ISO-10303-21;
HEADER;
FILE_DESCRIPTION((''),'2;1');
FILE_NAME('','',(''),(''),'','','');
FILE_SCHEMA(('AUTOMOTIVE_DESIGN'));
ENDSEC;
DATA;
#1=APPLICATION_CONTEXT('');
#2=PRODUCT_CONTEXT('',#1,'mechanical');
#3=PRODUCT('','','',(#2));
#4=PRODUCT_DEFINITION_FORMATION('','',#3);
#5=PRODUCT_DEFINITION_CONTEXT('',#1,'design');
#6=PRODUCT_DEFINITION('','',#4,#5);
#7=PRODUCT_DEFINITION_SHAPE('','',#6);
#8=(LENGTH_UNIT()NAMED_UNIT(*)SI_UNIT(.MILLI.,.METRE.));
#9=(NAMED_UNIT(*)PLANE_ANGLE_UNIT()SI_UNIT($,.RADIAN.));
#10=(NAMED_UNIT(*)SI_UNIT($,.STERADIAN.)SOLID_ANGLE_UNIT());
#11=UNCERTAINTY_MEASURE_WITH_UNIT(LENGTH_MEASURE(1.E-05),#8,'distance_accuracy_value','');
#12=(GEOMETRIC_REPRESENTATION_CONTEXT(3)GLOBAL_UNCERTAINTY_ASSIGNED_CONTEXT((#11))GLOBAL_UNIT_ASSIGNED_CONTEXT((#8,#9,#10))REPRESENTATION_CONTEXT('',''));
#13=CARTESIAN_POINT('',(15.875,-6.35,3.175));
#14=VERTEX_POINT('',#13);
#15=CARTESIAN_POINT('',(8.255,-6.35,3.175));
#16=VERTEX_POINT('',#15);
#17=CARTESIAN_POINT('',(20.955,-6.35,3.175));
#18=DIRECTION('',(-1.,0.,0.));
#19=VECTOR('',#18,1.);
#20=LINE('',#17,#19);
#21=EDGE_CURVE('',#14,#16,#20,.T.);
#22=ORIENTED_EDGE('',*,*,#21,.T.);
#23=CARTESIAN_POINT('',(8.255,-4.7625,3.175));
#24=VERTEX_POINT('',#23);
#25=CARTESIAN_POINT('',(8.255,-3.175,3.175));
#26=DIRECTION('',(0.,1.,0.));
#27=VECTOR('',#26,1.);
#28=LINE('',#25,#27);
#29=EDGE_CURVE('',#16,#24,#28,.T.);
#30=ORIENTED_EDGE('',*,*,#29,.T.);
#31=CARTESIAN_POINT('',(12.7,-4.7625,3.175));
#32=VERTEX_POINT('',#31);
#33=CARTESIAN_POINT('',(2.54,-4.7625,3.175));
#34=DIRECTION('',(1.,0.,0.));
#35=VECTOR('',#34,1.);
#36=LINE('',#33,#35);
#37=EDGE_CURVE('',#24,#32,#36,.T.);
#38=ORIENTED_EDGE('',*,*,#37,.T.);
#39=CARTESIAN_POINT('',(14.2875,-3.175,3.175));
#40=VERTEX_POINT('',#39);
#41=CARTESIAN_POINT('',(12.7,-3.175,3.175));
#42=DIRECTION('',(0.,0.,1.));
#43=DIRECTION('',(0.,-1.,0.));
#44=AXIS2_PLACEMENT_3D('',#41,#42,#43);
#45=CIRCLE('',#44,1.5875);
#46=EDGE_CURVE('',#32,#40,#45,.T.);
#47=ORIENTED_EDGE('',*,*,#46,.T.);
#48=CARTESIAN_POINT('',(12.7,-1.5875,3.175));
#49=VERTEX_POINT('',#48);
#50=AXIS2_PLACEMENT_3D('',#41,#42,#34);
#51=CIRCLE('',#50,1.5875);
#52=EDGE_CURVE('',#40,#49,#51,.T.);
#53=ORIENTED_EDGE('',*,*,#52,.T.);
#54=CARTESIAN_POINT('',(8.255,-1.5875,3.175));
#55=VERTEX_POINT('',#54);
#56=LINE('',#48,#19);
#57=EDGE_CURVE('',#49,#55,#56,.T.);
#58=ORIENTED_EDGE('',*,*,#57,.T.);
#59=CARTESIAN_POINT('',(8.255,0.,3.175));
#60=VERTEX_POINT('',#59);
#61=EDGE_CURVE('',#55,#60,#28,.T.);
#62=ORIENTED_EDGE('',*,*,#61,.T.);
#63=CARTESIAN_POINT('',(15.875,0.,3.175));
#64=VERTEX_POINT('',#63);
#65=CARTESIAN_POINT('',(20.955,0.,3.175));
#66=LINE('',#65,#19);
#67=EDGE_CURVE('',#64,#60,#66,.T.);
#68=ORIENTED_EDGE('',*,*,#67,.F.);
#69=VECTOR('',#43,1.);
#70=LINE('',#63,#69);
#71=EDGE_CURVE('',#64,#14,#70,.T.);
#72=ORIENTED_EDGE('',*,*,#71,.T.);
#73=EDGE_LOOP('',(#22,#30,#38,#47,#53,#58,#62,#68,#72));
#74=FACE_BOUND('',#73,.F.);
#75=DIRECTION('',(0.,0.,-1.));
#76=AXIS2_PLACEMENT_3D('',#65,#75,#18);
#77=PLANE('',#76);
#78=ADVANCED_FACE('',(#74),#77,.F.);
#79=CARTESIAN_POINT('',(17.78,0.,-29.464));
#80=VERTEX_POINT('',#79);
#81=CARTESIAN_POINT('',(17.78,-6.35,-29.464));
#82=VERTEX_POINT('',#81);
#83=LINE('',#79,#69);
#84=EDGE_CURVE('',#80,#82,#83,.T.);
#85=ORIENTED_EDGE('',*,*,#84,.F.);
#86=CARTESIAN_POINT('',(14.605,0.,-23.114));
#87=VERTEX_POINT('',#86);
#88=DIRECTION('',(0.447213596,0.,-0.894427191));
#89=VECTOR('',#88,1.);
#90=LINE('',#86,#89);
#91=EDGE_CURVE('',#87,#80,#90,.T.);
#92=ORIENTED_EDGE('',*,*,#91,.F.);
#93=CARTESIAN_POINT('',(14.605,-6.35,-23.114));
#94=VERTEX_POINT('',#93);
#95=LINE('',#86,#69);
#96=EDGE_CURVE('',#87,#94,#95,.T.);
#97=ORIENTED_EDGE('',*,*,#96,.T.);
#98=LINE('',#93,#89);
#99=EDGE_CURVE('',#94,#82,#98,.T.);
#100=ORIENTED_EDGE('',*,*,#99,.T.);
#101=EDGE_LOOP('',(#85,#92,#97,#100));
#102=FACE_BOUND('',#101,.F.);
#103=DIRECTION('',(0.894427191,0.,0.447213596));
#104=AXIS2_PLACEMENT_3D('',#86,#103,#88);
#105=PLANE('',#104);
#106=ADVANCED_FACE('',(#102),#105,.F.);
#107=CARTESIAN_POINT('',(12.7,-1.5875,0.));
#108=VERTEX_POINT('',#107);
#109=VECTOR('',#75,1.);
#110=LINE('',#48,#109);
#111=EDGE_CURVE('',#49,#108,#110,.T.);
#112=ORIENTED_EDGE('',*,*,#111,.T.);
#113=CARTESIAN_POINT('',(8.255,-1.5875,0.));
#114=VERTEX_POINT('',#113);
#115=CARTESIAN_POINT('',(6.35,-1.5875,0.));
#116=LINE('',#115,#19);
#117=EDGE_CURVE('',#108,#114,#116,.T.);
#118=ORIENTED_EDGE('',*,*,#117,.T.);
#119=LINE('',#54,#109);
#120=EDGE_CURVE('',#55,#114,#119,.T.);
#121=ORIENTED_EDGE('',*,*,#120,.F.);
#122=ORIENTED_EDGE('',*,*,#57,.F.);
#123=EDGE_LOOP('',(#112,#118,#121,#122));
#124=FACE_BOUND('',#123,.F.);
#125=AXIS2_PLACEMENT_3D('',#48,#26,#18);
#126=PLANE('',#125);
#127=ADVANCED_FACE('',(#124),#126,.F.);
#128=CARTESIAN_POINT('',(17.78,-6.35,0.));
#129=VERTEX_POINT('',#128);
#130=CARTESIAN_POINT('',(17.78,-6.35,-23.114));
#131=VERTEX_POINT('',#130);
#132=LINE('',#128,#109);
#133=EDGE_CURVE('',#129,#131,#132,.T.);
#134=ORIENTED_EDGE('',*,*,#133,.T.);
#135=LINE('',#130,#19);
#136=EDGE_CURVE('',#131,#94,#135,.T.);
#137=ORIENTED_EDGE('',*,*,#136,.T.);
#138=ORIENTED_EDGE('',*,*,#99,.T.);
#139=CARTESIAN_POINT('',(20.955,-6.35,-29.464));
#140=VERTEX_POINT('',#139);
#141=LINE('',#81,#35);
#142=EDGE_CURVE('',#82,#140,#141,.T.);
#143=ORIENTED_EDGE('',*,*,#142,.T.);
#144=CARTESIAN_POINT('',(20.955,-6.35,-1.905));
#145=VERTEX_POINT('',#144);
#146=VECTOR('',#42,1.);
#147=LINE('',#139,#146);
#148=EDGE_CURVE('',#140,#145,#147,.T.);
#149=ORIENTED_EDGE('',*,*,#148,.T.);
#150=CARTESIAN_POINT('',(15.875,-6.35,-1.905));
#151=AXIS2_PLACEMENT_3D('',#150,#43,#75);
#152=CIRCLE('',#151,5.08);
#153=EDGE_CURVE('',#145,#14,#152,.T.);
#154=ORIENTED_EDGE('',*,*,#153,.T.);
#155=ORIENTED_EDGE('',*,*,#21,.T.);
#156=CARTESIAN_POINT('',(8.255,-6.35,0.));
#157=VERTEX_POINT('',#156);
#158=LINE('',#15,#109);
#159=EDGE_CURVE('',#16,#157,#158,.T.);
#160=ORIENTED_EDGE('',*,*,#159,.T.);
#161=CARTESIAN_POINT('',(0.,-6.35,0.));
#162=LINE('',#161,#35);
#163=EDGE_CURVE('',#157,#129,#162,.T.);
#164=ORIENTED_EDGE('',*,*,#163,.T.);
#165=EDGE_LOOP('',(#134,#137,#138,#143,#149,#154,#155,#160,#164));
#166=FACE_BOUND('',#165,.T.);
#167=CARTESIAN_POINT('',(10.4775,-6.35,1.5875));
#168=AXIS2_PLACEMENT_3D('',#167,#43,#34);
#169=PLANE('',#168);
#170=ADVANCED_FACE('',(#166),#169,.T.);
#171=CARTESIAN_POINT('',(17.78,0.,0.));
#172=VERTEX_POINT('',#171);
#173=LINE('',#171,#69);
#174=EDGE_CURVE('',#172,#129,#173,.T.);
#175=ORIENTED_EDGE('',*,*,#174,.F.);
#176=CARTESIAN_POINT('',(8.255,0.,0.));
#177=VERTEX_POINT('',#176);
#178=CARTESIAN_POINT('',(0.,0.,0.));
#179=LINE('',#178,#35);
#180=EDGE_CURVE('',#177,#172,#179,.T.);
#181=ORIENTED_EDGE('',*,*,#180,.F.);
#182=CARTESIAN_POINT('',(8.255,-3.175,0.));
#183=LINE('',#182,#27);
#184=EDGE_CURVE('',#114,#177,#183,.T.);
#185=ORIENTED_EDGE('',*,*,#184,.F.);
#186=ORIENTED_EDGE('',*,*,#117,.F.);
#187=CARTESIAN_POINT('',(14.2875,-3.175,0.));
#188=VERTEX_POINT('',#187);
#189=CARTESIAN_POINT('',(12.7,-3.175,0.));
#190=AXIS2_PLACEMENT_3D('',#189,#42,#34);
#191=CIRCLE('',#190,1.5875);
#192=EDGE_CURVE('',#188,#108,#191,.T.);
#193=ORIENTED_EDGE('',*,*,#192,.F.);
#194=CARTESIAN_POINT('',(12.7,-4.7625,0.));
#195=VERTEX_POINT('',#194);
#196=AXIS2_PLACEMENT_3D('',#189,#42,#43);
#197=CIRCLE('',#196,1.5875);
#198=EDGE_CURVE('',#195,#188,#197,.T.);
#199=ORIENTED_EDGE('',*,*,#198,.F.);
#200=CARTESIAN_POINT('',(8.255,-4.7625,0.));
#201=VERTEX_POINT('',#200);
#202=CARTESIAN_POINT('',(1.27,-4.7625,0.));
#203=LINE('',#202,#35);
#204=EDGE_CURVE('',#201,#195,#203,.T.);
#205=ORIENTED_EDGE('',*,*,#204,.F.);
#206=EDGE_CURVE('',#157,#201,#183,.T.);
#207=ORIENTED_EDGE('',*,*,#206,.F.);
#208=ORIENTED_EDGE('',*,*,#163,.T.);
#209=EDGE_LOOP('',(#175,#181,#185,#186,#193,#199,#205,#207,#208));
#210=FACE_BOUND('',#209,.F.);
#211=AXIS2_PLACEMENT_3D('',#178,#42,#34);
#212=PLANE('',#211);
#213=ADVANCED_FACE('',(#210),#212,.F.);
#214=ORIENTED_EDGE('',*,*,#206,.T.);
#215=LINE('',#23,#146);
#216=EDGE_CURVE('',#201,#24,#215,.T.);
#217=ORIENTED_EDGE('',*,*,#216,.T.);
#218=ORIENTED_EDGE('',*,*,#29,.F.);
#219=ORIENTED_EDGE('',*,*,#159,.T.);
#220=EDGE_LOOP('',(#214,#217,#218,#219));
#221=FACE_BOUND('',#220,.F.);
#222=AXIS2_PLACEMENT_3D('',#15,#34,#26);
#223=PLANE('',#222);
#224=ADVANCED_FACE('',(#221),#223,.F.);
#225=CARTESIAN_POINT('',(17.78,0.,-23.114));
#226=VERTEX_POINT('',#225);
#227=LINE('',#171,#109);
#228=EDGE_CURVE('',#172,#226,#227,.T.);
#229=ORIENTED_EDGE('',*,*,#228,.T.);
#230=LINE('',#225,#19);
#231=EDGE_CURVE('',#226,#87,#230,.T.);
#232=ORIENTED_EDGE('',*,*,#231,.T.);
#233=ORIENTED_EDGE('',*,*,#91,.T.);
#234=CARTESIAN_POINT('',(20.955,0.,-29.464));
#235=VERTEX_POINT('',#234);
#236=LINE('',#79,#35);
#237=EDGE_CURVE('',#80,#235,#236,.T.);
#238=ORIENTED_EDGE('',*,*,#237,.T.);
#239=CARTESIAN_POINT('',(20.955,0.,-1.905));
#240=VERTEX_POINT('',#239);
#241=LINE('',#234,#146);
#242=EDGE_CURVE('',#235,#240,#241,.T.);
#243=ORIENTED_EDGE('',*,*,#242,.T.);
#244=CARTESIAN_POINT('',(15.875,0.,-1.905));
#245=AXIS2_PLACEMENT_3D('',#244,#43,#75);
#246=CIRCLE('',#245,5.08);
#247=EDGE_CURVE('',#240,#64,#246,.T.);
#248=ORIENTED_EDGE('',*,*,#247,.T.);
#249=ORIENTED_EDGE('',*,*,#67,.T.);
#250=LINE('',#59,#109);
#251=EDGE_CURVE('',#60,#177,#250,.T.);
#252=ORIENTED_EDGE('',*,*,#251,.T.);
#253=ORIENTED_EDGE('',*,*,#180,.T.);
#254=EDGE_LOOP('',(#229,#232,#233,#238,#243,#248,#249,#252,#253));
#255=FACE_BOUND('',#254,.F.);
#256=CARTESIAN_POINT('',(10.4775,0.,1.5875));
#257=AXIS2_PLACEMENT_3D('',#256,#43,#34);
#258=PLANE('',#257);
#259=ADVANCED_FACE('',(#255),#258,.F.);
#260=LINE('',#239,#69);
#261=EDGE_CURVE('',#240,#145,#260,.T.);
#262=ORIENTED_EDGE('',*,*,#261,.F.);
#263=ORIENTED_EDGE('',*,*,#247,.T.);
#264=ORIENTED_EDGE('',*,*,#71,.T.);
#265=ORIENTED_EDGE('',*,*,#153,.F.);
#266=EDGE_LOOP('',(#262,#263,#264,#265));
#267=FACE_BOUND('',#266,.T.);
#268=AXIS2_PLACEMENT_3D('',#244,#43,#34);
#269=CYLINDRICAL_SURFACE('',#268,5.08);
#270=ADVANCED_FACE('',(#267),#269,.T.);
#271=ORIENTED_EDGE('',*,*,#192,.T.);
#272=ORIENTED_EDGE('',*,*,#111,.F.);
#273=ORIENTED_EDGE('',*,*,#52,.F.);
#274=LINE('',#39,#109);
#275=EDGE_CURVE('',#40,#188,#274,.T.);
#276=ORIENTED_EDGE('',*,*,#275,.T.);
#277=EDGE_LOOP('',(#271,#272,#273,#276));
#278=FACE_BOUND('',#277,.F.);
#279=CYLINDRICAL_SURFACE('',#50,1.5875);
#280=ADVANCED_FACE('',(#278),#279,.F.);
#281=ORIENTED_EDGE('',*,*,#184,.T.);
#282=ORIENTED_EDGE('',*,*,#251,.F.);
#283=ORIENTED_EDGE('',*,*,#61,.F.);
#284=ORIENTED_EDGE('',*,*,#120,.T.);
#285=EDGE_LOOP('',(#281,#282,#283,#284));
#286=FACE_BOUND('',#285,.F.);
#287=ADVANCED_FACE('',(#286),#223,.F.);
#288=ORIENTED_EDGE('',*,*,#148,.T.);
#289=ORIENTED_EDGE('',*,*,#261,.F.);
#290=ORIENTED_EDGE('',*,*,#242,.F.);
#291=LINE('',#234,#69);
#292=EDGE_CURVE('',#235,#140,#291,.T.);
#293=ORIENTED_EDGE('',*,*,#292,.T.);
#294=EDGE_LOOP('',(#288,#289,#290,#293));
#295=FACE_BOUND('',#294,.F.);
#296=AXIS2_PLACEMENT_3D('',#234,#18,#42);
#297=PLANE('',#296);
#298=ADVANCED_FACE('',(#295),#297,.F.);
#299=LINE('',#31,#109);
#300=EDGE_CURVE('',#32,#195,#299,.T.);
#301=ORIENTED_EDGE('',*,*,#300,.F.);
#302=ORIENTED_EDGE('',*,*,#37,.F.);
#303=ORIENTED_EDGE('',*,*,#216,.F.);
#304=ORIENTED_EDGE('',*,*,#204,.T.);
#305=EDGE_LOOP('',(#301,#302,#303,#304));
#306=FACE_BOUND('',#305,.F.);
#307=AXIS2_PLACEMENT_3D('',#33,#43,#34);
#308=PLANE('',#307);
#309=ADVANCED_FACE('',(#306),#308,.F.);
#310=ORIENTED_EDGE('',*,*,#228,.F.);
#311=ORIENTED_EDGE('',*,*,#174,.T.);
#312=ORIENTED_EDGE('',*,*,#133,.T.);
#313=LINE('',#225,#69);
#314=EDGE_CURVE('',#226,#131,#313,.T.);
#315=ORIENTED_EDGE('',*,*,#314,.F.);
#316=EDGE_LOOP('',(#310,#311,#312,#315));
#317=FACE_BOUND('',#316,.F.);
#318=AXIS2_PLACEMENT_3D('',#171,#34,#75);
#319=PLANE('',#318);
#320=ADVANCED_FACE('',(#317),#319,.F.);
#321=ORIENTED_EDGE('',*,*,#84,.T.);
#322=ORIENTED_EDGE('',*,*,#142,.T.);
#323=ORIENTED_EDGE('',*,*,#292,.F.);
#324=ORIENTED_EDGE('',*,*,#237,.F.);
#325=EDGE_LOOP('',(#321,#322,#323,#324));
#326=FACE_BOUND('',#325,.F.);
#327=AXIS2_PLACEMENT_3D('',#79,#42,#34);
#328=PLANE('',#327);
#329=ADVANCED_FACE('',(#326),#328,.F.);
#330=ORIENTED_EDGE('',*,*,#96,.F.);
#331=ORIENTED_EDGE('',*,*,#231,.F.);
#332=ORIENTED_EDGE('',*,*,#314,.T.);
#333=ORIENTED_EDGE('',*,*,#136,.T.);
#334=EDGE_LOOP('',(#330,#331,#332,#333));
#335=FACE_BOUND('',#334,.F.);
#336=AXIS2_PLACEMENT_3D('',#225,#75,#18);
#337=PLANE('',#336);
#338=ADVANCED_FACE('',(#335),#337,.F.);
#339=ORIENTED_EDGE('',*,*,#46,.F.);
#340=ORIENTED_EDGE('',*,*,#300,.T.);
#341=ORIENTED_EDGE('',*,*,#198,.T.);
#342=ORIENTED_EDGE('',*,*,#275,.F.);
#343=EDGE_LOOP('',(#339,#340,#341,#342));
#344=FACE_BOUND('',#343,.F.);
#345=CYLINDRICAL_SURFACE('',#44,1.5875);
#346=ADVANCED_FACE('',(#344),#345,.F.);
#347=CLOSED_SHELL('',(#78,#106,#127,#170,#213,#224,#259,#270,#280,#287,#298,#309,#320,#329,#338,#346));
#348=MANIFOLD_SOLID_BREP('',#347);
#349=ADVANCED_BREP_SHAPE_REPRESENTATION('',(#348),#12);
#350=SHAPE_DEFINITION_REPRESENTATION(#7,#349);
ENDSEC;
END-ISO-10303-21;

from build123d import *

# Parameters (mm, degrees)
F1_DEPTH = 6.35
F2_R     = 5.08
F4_DEPTH = 25.4
F5_W     = 8.255
F5_H     = 6.35
F6_DEPTH = 4.99459


with BuildPart() as f1:
    # F0 (on Front) → F1 (new body)
    with BuildSketch(Plane.XZ):
        Polygon((0, 3.175), (0, 0), (17.78, 0), (20.955, 0), (20.955, 3.175), align=None)
        Polygon((20.955, 0), (17.78, 0), (17.78, -23.114), (17.78, -29.464), (20.955, -29.464), align=None)
        Polygon((17.78, -29.464), (17.78, -23.114), (14.605, -23.114), align=None)
    extrude(amount=F1_DEPTH)

    # F2
    f2_edges = [f1.edges().sort_by_distance(p)[0] for p in [
        (20.955, -3.175, 3.175),
    ]]
    fillet(f2_edges, radius=F2_R)

    # F3 (on face) → F4 (cut)
    with BuildSketch(Plane.XY.offset(3.175)):
        with BuildLine():
            ThreePointArc((4.1275, -3.175), (3.6625320151, -4.2975320151), (2.54, -4.7625))
            Line((2.54, -4.7625), (12.7, -4.7625))
            ThreePointArc((12.7, -4.7625), (11.1125, -3.175), (12.7, -1.5875))
            Line((12.7, -1.5875), (2.54, -1.5875))
            ThreePointArc((2.54, -1.5875), (3.6625320151, -2.0524679849), (4.1275, -3.175))
        make_face()
        with BuildLine():
            ThreePointArc((2.54, -1.5875), (0.9525, -3.175), (2.54, -4.7625))
            Line((2.54, -4.7625), (2.54, -1.5875))
        make_face()
        with BuildLine():
            Line((2.54, -1.5875), (2.54, -4.7625))
            ThreePointArc((2.54, -4.7625), (3.6625320151, -4.2975320151), (4.1275, -3.175))
            ThreePointArc((4.1275, -3.175), (3.6625320151, -2.0524679849), (2.54, -1.5875))
        make_face()
        with BuildLine():
            ThreePointArc((12.7, -1.5875), (11.1125, -3.175), (12.7, -4.7625))
            Line((12.7, -4.7625), (12.7, -1.5875))
        make_face()
        with BuildLine():
            Line((12.7, -1.5875), (12.7, -4.7625))
            ThreePointArc((12.7, -4.7625), (13.8225320151, -4.2975320151), (14.2875, -3.175))
            ThreePointArc((14.2875, -3.175), (13.8225320151, -2.0524679849), (12.7, -1.5875))
        make_face()
    extrude(amount=-F4_DEPTH, mode=Mode.SUBTRACT)

    # F5 (on face) → F6 (cut)
    with BuildSketch(Plane.XY.offset(3.175)):
        with Locations((4.1275, -3.175)):
            Rectangle(F5_W, F5_H)
    extrude(amount=-F6_DEPTH, mode=Mode.SUBTRACT)


solid = f1.part
